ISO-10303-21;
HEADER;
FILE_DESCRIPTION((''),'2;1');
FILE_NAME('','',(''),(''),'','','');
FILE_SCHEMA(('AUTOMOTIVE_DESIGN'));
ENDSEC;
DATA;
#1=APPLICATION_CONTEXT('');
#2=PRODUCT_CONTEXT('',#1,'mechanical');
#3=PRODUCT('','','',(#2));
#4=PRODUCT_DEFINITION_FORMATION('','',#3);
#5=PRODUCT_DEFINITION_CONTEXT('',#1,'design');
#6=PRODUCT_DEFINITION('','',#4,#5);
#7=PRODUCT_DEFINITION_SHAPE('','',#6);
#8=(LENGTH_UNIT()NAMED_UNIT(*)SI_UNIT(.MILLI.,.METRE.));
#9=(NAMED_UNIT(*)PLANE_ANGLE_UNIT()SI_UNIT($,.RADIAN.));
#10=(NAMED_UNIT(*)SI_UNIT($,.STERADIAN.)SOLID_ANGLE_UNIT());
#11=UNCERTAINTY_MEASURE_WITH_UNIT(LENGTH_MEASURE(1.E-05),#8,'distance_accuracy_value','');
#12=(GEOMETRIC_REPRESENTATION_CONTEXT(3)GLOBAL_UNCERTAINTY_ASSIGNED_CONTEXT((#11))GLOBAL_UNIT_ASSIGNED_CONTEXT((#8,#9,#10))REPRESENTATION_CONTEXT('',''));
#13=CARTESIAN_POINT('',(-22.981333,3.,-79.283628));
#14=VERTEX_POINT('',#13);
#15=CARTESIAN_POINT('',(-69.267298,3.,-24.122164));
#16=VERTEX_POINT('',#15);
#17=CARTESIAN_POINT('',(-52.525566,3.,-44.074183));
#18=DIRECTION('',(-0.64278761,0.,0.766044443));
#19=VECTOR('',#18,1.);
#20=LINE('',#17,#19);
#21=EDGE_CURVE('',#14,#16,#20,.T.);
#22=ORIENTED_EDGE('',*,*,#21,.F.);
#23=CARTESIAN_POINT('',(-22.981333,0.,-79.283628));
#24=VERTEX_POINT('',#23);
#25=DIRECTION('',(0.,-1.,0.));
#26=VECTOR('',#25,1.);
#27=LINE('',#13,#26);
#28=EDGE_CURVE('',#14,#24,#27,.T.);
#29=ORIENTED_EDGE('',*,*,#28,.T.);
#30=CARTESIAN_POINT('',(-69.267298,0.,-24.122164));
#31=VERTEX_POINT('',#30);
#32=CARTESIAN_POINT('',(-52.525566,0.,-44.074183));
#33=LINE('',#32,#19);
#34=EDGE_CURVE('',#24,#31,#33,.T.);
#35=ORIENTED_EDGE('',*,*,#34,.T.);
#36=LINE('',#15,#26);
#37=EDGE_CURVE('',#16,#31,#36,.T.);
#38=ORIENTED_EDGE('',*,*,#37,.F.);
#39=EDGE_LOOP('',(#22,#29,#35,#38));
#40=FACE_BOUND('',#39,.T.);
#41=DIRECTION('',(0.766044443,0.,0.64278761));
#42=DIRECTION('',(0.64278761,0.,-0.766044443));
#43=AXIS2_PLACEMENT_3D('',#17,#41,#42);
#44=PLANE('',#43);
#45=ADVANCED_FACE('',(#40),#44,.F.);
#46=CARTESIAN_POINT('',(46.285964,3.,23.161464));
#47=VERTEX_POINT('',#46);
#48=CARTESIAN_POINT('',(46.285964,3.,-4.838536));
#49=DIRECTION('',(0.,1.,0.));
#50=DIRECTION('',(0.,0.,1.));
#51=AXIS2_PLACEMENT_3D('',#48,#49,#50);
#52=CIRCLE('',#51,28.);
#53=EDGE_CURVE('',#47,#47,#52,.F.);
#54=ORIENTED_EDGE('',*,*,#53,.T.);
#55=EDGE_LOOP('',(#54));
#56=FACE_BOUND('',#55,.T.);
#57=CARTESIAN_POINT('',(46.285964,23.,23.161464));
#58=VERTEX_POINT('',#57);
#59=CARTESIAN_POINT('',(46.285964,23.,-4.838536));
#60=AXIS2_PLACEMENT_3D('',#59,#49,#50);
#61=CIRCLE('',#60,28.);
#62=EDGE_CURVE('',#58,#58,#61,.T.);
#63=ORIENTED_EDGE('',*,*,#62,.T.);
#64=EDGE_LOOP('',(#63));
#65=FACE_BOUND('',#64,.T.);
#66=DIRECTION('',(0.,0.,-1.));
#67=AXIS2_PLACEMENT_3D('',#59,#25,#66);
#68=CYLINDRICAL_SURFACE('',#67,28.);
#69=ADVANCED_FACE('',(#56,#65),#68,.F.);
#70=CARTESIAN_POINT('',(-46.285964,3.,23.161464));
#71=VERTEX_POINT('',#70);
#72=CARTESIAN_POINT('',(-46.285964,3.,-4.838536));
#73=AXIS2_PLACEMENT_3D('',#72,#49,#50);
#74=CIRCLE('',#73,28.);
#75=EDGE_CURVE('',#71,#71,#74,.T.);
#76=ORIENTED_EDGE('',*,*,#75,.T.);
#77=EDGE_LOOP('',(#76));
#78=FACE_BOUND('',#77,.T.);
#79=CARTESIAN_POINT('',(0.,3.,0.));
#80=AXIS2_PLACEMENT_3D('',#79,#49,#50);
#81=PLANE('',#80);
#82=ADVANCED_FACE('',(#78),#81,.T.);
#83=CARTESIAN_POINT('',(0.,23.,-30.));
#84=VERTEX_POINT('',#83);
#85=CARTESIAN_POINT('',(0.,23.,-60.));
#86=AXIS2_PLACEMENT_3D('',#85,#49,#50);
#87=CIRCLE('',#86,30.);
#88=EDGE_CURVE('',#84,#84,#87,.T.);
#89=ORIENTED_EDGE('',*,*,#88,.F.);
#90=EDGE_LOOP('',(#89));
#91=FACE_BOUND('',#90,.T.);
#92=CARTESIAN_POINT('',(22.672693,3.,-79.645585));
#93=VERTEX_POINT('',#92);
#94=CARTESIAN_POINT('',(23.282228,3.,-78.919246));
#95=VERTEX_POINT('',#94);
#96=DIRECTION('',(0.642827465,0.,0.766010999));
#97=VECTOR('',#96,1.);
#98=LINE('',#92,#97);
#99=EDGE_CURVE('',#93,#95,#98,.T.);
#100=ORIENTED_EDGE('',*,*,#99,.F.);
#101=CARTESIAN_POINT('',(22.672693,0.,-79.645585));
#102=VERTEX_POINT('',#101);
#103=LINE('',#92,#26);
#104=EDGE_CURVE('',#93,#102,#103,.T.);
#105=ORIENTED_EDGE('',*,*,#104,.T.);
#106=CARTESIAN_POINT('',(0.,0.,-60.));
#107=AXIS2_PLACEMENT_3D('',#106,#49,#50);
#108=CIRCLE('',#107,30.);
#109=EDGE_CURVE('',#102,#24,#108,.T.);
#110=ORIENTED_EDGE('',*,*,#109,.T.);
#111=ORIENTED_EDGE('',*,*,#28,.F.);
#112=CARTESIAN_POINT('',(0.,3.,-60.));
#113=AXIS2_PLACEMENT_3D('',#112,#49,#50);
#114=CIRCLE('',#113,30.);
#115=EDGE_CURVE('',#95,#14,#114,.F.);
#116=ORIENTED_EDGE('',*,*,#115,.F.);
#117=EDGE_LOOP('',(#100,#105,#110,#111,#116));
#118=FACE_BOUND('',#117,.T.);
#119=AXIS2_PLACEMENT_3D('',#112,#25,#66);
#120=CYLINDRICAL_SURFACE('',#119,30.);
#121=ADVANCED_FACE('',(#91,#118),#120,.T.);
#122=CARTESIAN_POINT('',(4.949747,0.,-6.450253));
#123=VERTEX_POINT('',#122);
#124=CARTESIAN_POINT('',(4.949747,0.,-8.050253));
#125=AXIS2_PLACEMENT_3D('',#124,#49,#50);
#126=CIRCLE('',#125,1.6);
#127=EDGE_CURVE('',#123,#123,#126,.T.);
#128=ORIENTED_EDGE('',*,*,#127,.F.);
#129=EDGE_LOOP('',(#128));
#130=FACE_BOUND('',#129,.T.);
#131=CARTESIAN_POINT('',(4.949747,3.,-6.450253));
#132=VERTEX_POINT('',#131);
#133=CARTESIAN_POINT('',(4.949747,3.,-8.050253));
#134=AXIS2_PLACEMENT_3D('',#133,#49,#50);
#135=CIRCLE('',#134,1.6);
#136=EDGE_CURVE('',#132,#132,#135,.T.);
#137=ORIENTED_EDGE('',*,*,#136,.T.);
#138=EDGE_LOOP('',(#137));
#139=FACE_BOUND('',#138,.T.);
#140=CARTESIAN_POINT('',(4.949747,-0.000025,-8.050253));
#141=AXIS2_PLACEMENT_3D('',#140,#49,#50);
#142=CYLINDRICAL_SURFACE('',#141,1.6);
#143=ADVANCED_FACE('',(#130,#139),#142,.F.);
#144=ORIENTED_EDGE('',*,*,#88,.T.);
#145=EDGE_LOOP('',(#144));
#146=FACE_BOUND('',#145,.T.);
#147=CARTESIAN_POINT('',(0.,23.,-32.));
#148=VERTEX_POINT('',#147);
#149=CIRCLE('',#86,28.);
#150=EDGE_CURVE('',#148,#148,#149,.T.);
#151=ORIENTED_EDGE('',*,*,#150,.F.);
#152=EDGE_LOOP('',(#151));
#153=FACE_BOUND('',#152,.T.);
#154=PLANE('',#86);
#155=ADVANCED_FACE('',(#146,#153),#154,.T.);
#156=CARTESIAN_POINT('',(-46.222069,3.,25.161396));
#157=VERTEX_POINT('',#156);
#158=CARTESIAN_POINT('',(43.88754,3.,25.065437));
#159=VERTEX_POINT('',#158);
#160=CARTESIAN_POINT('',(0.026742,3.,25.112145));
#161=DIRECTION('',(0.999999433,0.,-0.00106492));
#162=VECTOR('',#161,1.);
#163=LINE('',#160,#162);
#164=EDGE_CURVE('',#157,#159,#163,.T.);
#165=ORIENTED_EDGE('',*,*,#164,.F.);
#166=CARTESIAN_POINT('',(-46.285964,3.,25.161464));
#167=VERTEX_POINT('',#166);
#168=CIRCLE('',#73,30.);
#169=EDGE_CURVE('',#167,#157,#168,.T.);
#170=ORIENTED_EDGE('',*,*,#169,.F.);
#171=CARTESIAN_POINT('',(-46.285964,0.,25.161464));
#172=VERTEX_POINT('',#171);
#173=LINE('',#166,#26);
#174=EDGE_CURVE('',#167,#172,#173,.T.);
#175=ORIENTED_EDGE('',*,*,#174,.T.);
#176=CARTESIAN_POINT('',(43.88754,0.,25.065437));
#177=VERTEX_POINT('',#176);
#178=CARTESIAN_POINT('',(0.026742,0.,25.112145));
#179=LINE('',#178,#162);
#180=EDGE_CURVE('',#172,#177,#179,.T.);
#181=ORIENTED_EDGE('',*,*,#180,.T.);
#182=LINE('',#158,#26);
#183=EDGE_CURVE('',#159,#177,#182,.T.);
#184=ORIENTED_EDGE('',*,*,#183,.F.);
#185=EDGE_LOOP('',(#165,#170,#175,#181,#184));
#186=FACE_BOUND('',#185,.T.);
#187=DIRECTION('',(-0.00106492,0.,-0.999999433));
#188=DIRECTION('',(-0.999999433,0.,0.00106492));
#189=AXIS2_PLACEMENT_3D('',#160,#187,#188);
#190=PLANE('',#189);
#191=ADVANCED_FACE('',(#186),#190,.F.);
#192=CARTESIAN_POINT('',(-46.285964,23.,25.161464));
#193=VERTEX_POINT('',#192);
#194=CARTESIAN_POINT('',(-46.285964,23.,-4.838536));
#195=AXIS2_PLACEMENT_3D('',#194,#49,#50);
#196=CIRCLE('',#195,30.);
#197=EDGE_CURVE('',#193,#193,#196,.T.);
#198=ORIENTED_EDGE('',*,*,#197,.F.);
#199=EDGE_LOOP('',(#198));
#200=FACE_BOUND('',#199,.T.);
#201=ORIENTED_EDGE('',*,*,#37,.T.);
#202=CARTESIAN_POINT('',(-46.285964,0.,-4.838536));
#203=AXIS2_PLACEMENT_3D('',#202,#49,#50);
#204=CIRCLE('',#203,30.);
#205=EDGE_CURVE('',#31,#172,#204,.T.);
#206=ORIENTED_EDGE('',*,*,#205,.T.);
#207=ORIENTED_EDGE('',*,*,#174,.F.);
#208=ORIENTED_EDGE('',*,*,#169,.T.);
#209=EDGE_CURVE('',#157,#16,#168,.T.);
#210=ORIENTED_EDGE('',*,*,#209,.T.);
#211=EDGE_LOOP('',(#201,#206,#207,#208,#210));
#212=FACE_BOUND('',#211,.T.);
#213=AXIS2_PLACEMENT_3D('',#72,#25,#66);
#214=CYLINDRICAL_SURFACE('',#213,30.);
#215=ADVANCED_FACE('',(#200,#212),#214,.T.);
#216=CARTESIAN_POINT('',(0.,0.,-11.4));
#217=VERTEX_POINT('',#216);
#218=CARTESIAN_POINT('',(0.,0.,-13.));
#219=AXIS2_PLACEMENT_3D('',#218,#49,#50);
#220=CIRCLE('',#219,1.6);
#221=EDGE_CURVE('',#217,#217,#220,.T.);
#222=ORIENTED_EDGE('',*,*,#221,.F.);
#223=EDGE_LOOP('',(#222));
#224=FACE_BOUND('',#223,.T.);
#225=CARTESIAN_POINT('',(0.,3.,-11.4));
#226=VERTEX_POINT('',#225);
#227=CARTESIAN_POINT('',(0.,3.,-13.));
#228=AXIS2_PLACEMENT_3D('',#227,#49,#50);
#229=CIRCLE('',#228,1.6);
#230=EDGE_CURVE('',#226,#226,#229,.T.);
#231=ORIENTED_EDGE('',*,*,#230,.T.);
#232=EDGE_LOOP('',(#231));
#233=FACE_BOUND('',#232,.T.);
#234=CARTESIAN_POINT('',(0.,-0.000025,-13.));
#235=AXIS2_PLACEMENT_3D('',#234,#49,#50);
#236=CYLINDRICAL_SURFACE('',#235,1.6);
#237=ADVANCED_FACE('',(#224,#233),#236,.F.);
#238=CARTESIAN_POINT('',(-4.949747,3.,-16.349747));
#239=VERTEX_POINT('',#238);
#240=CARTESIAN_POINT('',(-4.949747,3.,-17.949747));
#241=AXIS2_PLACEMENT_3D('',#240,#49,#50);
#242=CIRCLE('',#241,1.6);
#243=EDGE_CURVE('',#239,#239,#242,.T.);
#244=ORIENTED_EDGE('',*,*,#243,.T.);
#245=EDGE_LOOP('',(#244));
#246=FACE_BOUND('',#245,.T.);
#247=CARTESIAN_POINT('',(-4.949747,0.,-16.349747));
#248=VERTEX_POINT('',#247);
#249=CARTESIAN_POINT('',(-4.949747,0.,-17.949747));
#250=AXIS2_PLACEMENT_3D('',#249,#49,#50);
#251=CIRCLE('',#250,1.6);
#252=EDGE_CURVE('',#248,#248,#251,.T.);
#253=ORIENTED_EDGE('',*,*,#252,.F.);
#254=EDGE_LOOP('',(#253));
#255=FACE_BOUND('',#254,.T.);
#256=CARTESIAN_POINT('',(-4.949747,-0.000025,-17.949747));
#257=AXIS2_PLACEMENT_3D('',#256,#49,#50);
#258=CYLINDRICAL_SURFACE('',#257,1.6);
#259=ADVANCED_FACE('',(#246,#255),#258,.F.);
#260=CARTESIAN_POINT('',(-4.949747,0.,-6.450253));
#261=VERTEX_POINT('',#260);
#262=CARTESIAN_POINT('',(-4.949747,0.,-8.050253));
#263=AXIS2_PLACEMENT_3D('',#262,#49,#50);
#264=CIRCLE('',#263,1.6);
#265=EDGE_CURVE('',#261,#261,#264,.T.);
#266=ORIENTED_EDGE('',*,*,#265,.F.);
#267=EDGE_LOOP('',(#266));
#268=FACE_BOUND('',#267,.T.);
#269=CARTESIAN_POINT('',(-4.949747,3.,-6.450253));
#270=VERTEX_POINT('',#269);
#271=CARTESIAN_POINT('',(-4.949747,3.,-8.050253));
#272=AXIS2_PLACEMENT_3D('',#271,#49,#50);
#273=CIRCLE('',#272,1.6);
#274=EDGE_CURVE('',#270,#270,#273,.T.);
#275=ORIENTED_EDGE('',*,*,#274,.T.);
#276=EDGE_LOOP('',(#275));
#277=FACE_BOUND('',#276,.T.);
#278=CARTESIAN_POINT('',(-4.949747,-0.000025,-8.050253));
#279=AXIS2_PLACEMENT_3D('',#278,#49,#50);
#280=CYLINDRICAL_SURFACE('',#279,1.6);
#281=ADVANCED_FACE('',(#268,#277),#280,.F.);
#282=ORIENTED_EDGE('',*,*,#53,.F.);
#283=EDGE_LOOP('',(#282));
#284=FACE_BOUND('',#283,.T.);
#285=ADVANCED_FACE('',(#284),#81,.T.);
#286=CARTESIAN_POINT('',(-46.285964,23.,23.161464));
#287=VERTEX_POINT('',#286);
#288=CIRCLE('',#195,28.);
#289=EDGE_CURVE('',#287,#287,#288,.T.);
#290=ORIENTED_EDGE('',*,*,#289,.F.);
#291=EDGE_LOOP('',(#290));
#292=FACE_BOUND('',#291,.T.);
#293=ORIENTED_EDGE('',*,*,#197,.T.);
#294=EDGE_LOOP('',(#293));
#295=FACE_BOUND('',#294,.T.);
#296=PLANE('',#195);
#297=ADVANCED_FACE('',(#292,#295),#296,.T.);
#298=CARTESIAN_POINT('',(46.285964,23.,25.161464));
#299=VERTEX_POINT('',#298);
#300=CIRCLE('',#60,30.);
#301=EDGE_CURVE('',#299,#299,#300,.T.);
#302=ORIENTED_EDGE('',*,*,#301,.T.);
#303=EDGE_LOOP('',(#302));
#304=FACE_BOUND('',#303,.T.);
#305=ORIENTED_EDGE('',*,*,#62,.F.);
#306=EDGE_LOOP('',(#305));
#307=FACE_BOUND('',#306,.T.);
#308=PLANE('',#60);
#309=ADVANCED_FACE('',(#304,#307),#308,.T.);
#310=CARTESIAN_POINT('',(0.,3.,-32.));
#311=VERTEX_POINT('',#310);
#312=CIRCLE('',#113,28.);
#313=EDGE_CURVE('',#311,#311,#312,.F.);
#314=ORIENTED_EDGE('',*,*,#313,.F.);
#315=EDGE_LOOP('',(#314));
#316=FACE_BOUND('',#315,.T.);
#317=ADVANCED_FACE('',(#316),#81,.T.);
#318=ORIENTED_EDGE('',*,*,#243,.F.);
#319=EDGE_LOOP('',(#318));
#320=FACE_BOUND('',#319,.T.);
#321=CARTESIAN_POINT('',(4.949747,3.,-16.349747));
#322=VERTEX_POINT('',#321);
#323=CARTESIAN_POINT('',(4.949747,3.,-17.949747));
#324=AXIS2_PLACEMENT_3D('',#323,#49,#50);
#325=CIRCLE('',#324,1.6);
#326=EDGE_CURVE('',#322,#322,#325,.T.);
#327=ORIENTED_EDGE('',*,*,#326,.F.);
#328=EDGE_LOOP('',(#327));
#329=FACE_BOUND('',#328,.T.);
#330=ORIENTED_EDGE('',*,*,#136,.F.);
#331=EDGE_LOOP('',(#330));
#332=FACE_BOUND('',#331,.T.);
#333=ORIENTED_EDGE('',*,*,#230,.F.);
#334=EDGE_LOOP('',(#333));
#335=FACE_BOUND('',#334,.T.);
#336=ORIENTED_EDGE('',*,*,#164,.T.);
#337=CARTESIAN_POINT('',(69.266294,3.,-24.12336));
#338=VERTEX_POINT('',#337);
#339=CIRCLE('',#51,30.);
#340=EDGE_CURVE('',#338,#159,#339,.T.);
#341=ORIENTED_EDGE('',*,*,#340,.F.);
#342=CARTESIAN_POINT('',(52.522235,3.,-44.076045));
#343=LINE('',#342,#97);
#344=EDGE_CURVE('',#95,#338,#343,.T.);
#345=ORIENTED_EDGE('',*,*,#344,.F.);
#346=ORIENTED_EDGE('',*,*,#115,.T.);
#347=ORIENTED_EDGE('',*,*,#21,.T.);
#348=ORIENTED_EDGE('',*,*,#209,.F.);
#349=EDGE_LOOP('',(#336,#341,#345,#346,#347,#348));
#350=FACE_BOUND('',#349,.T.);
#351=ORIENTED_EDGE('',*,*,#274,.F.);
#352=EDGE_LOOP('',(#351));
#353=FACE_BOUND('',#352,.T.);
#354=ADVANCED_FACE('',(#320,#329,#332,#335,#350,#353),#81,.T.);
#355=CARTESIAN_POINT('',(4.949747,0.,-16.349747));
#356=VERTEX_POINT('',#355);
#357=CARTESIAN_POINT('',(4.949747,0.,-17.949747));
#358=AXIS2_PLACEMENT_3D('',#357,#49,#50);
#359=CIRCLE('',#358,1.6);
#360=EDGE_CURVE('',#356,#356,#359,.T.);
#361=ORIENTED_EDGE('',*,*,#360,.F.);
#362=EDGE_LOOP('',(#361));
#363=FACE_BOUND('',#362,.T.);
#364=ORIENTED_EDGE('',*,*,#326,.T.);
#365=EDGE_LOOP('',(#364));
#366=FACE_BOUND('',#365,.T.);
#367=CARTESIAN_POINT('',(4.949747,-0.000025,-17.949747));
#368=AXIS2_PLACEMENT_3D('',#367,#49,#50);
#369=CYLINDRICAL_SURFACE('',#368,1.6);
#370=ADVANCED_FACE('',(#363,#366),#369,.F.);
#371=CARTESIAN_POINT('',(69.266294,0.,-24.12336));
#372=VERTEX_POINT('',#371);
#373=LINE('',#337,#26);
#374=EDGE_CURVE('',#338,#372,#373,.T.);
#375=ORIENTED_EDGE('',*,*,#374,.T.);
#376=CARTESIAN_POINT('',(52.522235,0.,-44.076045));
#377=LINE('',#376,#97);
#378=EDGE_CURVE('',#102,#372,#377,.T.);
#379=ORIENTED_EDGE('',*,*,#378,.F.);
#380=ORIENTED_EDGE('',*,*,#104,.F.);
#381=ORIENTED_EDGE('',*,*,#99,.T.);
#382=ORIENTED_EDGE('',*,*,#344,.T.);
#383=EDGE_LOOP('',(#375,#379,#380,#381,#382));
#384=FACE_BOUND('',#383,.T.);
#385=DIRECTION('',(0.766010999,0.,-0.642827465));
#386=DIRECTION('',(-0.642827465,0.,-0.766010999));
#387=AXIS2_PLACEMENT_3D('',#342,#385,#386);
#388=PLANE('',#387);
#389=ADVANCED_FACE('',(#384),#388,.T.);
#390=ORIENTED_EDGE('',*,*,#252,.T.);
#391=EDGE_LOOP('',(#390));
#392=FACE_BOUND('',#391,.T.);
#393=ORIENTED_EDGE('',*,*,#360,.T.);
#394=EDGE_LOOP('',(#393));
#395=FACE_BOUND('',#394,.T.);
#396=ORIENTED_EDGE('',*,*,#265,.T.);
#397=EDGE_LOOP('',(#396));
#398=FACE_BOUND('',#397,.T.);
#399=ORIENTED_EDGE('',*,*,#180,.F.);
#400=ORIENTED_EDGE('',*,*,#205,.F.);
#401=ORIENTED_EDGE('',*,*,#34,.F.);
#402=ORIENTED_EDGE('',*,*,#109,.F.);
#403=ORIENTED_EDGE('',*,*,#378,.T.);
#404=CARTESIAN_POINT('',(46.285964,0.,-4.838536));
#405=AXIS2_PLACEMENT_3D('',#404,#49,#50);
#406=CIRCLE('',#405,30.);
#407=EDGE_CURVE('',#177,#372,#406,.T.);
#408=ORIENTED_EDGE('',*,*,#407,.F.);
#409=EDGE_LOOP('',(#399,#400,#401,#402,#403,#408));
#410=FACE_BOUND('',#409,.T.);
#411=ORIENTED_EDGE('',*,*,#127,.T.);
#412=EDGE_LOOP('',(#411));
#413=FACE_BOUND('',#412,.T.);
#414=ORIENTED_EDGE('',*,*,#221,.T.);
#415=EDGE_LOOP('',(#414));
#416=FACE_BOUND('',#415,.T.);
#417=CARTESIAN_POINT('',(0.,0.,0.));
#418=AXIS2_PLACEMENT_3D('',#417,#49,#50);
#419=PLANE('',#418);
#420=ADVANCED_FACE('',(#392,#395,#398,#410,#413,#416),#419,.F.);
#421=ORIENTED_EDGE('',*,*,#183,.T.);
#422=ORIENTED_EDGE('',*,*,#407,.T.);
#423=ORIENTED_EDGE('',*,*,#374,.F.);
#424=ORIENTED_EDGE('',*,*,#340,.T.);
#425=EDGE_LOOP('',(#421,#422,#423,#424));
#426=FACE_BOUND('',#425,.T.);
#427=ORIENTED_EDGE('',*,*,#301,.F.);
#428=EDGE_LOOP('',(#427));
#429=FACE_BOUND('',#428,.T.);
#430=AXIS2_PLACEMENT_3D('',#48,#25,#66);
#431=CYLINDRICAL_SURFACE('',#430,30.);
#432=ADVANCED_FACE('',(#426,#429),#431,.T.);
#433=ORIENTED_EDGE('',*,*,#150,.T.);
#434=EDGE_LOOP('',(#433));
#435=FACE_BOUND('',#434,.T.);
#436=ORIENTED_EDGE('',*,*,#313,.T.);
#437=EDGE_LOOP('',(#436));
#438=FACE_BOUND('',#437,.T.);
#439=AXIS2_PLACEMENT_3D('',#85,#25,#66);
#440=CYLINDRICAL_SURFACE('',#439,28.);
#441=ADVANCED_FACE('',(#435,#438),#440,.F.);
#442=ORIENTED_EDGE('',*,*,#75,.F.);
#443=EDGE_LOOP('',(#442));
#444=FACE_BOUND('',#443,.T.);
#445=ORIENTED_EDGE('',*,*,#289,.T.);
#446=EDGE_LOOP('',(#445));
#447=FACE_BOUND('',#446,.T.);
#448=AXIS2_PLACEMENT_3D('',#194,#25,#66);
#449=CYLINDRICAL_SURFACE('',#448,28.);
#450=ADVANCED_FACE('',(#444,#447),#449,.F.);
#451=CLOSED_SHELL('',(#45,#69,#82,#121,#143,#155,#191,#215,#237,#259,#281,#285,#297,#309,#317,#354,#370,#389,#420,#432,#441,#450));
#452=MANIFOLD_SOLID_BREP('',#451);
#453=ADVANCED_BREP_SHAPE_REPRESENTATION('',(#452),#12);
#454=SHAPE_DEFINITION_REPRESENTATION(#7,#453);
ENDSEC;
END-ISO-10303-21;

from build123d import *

# Parameters (mm, degrees)
EXTRUDE_1_DEPTH          = 3
EXTRUDE_START            = -3.0000001
EXTRUDE_2_OUTLINE_R      = 30
EXTRUDE_2_OUTLINE_R_2    = 28
EXTRUDE_2_DEPTH          = 23.0000001
CUT_EXTRUDE_1_DEPTH      = 120.66431532924713
CUT_EXTRUDE_1_DEPTH_BACK = 120.66431532924713
SKETCH_6_R               = 1.6000000000000003
SKETCH_6_R_2             = 1.5999999999999923
SKETCH_6_R_3             = 1.5999999999999999
SKETCH_6_R_4             = 1.5999999999999257
SKETCH_6_R_5             = 1.6


with BuildPart() as part:
    # 草图1 → 凸台-拉伸1 (new body)
    with BuildSketch(Plane(origin=(0, 0, 0), x_dir=(1, 0, 0), z_dir=(0, 1, 0))):
        with BuildLine():
            Line((69.26629435231834, 24.123359602578955), (22.672692502757357, 79.64558511919181))
            ThreePointArc((22.672692502757354, 79.64558511919181), (-0.2378402213252036, 89.99905718567035), (-22.981333293569364, 79.28362829059616))
            Line((-22.981333293569378, 79.28362829059616), (-69.26729768514315, 24.12216394025026))
            ThreePointArc((-69.26729768514312, 24.122163940250257), (-73.47519800267324, -7.84001220256689), (-46.285964391573756, -25.161464350345888))
            Line((-46.28596439157374, -25.161464350345884), (43.8875404004589, -25.065436701169876))
            ThreePointArc((43.887540400458896, -25.065436701169865), (72.946574545668, -8.916894776595973), (69.26629435231834, 24.12335960257895))
        make_face()
    extrude(amount=EXTRUDE_1_DEPTH)

    # 凸台-拉伸2: read off the stored shape, not the designer's step
    # 凸台-拉伸2 outline → 凸台-拉伸2 (add)
    # profile 1 of 3: a face of its own
    with BuildSketch(Plane(origin=(0, 3, 0), x_dir=(1, 0, 0), z_dir=(0, 1, 0)).offset(EXTRUDE_START)):
        with Locations((-46.285964392, 4.83853565)):
            Circle(EXTRUDE_2_OUTLINE_R)
        with Locations((-46.285964392, 4.83853565)):
            Circle(EXTRUDE_2_OUTLINE_R_2, mode=Mode.SUBTRACT)
    # profile 2 of 3: a face of its own
    with BuildSketch(Plane(origin=(0, 3, 0), x_dir=(1, 0, 0), z_dir=(0, 1, 0)).offset(EXTRUDE_START)):
        with Locations((46.285964392, 4.83853565)):
            Circle(EXTRUDE_2_OUTLINE_R)
        with Locations((46.285964392, 4.83853565)):
            Circle(EXTRUDE_2_OUTLINE_R_2, mode=Mode.SUBTRACT)
    # profile 3 of 3: a face of its own
    with BuildSketch(Plane(origin=(0, 3, 0), x_dir=(1, 0, 0), z_dir=(0, 1, 0)).offset(EXTRUDE_START)):
        with Locations((0, 60)):
            Circle(EXTRUDE_2_OUTLINE_R)
        with Locations((0, 60)):
            Circle(EXTRUDE_2_OUTLINE_R_2, mode=Mode.SUBTRACT)
    extrude(amount=EXTRUDE_2_DEPTH)

    # 草图6 → 切除-拉伸1 (cut, two sides: drawn at the far end of the back side and taken through both)
    with BuildSketch(Plane(origin=(0, 3, 0), x_dir=(1, 0, 0), z_dir=(0, 1, 0)).offset(-CUT_EXTRUDE_1_DEPTH_BACK)):
        with Locations(Location((0, 13, 0), (0, 0, 270))):
            Circle(SKETCH_6_R)
        with Locations(Location((4.9497474683058345, 17.949747468305834, 0), (0, 0, 270))):
            Circle(SKETCH_6_R_2)
        with Locations(Location((4.949747468305964, 8.050252531694156, 0), (0, 0, 270))):
            Circle(SKETCH_6_R_3)
        with Locations(Location((-4.949747468305834, 8.050252531694166, 0), (0, 0, 270))):
            Circle(SKETCH_6_R_4)
        with Locations(Location((-4.949747468305791, 17.949747468305738, 0), (0, 0, 270))):
            Circle(SKETCH_6_R_5)
    extrude(amount=CUT_EXTRUDE_1_DEPTH + CUT_EXTRUDE_1_DEPTH_BACK, mode=Mode.SUBTRACT)


solid = part.part
